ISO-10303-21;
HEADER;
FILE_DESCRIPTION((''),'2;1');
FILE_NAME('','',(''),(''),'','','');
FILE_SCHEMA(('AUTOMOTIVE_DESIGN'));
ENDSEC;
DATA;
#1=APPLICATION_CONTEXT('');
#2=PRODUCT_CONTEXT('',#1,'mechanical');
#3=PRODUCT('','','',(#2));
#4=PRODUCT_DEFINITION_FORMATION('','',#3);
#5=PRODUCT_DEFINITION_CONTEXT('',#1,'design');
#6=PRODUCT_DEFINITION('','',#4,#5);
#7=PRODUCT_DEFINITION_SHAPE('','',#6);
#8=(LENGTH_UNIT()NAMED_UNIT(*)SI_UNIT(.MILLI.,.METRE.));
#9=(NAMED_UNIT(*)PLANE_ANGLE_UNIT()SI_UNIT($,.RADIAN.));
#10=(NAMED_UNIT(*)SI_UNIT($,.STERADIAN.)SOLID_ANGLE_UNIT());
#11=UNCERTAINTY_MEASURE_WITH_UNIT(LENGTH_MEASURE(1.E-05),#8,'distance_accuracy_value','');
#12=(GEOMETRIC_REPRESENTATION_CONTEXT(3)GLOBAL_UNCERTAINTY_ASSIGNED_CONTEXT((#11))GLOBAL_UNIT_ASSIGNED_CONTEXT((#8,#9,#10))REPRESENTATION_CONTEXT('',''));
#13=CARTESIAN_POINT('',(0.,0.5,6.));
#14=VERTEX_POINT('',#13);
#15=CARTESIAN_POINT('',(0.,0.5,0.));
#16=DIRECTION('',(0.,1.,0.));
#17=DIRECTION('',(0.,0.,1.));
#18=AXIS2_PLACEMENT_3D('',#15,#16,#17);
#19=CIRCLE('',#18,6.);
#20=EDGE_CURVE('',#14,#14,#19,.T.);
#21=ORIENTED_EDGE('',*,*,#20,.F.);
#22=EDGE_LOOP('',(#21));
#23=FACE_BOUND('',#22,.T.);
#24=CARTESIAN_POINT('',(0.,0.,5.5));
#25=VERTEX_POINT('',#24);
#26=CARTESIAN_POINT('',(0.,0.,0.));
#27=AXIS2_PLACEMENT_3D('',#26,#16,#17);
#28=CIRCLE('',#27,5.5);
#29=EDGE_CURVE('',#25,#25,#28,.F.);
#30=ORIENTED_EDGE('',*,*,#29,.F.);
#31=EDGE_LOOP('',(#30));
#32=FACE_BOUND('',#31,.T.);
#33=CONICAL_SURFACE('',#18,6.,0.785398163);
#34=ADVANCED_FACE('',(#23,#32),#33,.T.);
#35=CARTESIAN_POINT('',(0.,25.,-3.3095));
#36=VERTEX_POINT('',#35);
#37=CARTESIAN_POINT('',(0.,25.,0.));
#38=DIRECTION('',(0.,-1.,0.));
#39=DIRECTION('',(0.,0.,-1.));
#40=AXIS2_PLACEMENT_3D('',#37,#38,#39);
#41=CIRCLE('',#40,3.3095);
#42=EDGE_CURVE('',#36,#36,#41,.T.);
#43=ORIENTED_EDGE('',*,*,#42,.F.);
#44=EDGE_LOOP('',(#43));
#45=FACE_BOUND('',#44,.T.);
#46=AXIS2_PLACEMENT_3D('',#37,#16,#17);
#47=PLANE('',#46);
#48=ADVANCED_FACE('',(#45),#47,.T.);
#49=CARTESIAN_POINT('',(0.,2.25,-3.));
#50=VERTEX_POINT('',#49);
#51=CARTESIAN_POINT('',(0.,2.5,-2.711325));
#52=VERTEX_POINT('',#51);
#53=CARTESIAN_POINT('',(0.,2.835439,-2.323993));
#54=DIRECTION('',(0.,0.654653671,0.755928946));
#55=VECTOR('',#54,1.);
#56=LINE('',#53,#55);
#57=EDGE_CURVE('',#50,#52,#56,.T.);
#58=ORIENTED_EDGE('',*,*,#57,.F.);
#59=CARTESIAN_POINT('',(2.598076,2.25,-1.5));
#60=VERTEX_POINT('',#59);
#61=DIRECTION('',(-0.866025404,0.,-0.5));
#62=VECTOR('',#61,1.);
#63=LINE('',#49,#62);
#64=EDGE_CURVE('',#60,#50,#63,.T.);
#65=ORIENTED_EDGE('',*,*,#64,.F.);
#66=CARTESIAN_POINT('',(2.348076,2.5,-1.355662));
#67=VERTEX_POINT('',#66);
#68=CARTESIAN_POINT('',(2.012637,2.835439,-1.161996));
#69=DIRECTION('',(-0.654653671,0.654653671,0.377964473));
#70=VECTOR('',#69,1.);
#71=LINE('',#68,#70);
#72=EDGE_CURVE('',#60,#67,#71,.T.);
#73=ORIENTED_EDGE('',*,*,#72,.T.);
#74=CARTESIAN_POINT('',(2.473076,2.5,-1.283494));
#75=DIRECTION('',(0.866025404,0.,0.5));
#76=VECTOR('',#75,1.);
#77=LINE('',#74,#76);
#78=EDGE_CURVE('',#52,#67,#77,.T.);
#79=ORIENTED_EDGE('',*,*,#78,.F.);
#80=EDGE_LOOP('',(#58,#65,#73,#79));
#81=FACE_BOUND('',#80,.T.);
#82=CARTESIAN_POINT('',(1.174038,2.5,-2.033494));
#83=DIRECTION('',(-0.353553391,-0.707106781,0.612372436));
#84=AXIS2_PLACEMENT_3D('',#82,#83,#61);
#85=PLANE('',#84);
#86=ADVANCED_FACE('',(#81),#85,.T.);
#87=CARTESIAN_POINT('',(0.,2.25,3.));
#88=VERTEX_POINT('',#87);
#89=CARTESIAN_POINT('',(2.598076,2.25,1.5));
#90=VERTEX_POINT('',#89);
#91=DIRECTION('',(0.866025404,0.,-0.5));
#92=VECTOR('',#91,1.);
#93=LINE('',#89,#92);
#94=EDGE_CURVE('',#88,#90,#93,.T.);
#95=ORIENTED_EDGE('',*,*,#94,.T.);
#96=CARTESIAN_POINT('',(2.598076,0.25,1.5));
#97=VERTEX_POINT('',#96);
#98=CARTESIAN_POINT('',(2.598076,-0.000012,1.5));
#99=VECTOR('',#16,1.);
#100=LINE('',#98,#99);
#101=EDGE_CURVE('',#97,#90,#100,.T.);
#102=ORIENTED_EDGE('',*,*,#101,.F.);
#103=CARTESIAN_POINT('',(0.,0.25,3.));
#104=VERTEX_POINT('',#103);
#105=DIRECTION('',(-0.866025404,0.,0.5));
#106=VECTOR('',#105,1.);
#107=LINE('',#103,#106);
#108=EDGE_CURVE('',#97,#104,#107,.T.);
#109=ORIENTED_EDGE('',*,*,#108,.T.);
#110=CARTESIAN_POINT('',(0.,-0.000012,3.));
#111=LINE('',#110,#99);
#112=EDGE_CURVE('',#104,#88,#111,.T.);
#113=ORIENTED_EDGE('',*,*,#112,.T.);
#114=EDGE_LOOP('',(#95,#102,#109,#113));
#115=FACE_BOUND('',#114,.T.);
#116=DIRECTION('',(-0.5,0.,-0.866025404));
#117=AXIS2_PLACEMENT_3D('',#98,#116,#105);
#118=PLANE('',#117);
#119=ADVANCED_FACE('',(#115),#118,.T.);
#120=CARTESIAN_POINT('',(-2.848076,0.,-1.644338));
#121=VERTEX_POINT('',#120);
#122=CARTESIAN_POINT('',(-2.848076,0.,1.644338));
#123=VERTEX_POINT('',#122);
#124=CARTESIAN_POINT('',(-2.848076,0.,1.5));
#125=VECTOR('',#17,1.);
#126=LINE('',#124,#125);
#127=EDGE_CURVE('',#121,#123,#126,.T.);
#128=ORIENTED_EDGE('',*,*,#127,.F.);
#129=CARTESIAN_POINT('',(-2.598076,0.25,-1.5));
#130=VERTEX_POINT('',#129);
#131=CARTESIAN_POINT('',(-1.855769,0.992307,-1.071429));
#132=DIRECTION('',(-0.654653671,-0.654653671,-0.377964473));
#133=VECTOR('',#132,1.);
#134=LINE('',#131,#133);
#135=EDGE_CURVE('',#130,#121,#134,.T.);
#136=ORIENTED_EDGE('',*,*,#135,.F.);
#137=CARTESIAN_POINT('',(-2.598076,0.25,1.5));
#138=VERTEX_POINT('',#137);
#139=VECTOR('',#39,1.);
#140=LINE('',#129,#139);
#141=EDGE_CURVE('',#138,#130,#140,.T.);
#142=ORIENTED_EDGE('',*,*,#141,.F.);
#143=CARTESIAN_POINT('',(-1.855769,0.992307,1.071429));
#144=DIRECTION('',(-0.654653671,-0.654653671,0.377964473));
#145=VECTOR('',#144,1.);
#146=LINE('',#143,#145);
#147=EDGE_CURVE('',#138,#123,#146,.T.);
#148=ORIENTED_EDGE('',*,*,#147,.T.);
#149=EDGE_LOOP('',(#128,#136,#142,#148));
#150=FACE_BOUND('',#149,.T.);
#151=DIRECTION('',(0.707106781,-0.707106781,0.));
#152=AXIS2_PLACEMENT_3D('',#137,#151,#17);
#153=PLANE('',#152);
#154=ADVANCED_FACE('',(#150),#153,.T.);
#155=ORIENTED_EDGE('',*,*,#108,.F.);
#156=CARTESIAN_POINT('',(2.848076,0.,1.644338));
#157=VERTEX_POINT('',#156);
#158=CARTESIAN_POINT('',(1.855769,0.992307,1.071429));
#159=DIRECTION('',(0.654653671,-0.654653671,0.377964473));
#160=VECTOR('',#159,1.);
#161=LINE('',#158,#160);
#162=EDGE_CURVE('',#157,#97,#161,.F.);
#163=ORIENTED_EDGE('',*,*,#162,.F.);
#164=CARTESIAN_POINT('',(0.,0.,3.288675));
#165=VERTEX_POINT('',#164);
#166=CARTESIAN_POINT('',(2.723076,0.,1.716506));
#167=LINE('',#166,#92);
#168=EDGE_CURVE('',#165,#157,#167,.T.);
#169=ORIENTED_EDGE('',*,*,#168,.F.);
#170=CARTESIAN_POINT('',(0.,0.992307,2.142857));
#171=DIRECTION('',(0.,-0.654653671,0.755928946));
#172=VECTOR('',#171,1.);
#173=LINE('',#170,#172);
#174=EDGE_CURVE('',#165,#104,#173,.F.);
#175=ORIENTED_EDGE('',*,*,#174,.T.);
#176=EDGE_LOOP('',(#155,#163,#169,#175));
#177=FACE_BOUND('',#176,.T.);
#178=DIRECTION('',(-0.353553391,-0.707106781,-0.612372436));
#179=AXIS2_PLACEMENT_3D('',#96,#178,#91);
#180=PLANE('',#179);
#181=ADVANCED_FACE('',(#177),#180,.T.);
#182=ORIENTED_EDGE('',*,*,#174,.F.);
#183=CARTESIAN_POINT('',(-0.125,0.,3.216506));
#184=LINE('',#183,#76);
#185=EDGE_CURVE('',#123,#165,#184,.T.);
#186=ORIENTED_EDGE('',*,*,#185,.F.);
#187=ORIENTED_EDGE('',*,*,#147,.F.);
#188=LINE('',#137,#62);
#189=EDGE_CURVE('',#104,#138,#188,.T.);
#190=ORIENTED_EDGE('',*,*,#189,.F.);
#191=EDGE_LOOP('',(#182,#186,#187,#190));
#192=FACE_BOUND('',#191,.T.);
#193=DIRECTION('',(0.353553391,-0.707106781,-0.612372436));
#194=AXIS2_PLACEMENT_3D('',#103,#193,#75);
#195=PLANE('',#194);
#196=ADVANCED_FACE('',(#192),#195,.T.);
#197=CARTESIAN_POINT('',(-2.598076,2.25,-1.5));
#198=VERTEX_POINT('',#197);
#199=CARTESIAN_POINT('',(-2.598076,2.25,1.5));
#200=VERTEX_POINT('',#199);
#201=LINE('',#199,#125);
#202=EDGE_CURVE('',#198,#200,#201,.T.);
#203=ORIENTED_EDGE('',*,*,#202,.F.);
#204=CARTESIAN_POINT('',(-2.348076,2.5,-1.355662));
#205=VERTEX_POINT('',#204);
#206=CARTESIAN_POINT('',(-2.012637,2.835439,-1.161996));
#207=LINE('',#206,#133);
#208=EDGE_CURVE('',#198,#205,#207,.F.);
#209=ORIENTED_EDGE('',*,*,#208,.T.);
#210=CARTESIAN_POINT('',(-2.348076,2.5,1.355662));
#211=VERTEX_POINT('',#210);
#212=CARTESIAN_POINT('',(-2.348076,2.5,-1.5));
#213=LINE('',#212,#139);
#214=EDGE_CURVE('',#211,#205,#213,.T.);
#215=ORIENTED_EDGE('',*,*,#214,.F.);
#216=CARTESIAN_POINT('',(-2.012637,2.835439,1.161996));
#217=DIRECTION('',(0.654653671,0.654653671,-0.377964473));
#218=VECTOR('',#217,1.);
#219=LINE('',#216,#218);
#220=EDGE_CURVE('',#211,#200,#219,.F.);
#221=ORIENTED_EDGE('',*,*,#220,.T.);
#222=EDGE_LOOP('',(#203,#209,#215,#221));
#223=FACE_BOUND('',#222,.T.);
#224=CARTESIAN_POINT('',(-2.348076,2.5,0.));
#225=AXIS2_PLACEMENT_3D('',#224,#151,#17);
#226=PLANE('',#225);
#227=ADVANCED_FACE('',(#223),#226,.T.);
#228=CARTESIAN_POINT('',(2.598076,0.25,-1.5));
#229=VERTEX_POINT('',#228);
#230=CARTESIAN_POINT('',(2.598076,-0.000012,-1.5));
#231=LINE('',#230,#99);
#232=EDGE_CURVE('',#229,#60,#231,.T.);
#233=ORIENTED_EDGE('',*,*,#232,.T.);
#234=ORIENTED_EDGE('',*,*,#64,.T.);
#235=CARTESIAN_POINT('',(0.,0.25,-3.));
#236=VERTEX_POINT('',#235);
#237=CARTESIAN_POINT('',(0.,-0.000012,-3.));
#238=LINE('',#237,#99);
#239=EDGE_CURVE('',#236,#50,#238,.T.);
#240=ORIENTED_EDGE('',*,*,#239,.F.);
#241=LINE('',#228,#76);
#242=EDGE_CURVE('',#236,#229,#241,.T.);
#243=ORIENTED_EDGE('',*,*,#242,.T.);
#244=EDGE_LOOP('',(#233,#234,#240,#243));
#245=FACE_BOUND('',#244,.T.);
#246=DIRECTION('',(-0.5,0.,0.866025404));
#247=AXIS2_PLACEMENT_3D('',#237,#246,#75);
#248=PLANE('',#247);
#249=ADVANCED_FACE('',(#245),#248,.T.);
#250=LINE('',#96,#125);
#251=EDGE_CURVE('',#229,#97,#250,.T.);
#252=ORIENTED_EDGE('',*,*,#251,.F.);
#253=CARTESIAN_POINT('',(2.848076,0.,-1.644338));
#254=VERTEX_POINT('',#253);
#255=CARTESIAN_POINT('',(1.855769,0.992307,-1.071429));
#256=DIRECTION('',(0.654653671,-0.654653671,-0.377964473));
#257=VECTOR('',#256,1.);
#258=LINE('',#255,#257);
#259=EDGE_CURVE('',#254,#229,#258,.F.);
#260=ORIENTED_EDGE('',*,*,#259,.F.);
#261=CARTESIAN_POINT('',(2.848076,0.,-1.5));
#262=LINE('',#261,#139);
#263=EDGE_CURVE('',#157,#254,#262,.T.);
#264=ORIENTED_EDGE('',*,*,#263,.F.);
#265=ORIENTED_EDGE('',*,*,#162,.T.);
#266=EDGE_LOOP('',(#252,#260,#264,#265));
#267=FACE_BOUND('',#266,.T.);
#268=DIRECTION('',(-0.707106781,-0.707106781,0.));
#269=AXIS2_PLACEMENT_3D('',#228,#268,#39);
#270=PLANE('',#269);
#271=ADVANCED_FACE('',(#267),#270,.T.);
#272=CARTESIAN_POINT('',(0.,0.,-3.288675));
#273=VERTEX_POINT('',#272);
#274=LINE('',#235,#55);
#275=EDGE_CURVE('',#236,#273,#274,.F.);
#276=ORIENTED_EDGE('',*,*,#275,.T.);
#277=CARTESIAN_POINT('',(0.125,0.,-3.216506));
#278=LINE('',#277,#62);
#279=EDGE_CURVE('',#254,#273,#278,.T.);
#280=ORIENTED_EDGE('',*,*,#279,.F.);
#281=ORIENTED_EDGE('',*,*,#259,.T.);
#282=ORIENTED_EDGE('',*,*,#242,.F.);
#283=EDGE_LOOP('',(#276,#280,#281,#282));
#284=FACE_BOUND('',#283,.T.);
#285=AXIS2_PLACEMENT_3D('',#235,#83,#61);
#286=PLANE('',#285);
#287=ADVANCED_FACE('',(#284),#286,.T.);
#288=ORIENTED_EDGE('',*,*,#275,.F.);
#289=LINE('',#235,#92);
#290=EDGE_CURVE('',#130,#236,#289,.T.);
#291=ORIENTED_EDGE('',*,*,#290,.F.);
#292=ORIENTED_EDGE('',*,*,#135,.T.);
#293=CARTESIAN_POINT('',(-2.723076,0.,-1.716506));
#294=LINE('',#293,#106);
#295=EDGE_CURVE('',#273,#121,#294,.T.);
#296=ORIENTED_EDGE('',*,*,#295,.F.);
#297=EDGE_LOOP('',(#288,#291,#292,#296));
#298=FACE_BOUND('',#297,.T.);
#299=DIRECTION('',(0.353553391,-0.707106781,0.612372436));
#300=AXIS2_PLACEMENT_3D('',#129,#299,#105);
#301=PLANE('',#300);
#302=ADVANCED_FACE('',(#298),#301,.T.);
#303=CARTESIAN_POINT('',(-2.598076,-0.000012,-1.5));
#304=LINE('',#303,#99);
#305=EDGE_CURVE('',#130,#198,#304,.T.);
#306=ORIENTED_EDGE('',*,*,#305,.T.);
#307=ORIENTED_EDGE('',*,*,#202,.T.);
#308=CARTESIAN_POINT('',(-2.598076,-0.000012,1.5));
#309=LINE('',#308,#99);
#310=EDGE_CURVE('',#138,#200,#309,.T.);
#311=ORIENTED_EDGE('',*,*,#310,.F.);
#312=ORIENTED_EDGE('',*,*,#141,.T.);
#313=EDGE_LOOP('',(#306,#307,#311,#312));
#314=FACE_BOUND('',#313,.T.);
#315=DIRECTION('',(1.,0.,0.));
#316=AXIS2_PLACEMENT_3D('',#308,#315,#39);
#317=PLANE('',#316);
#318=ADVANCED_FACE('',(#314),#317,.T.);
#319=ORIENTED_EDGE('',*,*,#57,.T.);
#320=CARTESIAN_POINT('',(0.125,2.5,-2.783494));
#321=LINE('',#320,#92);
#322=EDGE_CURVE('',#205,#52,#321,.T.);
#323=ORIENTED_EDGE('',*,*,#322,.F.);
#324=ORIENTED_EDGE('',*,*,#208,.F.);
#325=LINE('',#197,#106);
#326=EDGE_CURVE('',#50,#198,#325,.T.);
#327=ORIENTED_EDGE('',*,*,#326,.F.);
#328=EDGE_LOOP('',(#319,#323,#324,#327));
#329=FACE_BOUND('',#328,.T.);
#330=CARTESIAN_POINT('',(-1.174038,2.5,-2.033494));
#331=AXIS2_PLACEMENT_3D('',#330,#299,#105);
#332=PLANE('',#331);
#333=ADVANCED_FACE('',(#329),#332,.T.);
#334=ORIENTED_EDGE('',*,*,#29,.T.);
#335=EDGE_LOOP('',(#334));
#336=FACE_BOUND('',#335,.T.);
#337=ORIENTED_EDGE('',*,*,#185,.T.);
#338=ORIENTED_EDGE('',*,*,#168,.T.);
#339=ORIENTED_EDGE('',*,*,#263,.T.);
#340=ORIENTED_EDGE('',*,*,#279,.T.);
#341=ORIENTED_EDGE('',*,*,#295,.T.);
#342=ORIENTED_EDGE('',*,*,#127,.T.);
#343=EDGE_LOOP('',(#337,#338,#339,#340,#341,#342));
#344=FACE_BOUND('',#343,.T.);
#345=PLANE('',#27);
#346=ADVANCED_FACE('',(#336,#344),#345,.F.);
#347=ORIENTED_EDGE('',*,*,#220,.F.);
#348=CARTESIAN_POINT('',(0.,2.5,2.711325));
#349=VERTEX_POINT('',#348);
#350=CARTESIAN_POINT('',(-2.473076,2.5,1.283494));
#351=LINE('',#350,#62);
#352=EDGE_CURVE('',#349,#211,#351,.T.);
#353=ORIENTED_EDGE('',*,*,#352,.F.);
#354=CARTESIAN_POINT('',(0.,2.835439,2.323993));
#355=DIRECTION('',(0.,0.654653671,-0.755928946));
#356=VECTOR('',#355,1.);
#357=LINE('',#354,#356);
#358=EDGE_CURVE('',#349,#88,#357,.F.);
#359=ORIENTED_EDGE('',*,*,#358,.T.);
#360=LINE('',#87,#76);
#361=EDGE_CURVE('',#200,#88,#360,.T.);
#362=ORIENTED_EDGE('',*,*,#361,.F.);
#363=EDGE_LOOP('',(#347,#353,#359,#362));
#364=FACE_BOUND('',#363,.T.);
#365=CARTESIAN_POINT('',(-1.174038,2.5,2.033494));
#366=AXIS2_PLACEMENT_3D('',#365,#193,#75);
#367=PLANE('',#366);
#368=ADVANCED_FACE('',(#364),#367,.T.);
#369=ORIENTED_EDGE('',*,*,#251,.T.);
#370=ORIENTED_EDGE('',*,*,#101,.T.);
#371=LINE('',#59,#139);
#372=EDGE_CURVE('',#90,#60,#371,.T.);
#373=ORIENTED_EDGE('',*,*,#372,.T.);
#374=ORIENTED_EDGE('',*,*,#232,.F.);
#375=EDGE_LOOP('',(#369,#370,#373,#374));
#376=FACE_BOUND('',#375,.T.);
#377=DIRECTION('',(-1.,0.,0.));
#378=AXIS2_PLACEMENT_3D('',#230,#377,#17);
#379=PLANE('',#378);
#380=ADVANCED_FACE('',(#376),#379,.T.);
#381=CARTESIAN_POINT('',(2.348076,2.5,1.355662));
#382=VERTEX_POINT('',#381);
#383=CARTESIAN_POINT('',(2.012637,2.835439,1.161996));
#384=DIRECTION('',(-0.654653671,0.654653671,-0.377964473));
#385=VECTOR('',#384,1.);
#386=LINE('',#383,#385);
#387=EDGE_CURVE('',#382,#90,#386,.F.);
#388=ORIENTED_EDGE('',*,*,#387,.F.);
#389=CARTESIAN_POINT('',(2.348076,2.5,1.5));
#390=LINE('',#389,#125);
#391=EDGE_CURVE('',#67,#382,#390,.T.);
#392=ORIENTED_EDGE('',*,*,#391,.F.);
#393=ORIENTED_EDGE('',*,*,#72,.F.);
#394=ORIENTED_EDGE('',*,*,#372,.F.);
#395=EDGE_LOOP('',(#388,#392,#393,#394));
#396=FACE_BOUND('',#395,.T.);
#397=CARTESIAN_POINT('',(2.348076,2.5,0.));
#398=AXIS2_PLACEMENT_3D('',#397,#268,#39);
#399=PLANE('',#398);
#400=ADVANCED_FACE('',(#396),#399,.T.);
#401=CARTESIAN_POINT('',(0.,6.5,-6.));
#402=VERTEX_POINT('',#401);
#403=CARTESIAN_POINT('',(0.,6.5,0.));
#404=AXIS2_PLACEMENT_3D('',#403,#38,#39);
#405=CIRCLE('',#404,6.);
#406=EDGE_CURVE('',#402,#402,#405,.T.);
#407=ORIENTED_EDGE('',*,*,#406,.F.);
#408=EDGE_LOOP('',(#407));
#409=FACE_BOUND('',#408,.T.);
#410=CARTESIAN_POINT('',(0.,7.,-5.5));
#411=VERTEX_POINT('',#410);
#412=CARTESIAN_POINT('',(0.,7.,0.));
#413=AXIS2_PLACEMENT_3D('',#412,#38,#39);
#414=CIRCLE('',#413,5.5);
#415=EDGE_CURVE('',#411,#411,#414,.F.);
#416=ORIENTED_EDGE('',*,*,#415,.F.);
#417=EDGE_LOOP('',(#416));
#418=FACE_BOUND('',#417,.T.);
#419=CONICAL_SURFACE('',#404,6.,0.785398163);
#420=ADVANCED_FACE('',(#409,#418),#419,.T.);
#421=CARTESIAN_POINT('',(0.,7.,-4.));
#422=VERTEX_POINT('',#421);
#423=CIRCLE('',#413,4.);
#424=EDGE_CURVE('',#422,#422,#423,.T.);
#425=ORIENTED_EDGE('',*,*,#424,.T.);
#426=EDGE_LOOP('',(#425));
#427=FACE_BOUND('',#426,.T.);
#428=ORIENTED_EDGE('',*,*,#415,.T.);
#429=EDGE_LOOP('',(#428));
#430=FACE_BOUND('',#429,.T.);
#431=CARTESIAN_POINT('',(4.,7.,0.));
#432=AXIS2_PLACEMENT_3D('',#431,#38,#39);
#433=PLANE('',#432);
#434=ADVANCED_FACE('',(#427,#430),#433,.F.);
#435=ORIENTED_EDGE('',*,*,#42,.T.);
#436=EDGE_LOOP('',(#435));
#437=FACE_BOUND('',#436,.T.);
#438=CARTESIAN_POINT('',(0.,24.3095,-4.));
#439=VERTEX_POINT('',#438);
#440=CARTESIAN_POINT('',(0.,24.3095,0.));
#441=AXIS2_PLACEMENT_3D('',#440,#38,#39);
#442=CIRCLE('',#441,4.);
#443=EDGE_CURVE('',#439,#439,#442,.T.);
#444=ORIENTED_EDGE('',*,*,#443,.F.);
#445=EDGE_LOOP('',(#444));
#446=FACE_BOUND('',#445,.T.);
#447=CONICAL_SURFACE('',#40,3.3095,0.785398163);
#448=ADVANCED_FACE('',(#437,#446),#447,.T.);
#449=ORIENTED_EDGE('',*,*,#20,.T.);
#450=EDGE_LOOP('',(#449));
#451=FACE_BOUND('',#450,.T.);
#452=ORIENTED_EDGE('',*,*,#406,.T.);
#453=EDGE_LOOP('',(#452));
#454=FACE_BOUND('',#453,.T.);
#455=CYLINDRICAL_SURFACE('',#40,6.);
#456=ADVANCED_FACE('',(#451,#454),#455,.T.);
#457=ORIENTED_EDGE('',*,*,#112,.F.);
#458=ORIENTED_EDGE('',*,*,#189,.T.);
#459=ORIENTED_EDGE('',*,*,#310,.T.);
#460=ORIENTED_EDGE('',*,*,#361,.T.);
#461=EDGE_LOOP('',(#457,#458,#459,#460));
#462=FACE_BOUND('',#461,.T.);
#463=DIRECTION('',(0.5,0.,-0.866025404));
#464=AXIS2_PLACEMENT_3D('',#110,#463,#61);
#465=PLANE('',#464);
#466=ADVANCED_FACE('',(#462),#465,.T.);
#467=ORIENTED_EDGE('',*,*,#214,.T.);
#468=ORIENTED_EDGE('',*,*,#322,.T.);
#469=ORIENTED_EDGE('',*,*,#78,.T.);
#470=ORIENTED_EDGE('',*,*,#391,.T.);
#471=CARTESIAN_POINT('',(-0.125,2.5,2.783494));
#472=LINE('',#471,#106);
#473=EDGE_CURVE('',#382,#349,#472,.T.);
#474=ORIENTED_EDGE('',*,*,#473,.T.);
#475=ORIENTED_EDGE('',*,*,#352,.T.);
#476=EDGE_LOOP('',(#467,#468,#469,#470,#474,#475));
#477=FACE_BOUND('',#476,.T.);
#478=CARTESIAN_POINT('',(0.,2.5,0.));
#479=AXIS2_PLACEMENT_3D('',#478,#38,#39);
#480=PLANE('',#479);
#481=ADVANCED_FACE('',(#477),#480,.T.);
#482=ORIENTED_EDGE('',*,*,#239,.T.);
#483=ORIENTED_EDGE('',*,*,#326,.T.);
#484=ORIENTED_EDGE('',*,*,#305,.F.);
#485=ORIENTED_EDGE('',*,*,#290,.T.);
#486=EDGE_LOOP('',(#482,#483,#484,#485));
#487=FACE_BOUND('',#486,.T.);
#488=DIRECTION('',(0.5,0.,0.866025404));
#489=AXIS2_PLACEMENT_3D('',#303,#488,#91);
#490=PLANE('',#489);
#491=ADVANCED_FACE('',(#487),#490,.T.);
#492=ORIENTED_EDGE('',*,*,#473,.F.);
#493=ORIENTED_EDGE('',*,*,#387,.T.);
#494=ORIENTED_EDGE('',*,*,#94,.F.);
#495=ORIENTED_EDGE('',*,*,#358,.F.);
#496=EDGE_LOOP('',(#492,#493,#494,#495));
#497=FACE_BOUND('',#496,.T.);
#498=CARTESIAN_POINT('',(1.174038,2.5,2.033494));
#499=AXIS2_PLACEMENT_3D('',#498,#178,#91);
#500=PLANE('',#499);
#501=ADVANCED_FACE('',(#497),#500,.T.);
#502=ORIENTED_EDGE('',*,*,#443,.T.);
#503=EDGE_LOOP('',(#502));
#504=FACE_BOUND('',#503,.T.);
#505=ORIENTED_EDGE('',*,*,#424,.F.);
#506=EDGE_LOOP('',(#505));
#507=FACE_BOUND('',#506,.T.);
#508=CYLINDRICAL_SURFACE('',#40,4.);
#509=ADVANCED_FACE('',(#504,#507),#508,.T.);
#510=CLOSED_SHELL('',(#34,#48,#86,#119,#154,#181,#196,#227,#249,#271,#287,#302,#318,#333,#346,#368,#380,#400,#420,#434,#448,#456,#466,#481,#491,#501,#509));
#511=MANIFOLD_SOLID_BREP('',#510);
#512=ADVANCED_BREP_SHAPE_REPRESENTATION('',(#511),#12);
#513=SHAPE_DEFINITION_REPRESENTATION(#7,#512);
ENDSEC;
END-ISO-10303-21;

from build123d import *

# Parameters (mm, degrees)
SKETCH1_R               = 6
BOSS_EXTRUDE1_DEPTH     = 25
CHAMFER1_SIZE           = 0.5
CUT_EXTRUDE1_DEPTH      = 27.400757565
CUT_EXTRUDE1_DEPTH_BACK = 2.5
CHAMFER2_SIZE           = 0.25


# Read off the part's stored shape, not the designer's step: M8x1.25 Machine Threads Stud2
with BuildPart() as part:
    # Sketch1 → Boss-Extrude1 (new body)
    with BuildSketch(Plane(origin=(0, 0, 0), x_dir=(1, 0, 0), z_dir=(0, 1, 0))):
        with Locations(Location((0, 0, 0), (0, 0, 270))):
            Circle(SKETCH1_R)
    extrude(amount=BOSS_EXTRUDE1_DEPTH)

    # M8x1.25 Machine Threads Stud2 outline → M8x1.25 Machine Threads Stud2 (revolve, cut)
    with BuildSketch(Plane.XY):
        Polygon((6, 25), (3.3095, 25), (4, 24.3095), (4, 7), (6, 7), align=None)
    revolve(axis=Axis((0, 0, 0), (0, 1, 0)), mode=Mode.SUBTRACT)

    # Chamfer1
    chamfer1_edges = [part.edges().sort_by_distance(p)[0] for p in [
        (0, 0, -6),
        (0, 7, -6),
    ]]
    chamfer(chamfer1_edges, length=CHAMFER1_SIZE)

    # Sketch6 → Cut-Extrude1 (cut, two sides: drawn at the far end of the back side and taken through both)
    with BuildSketch(Plane.XZ.offset(-CUT_EXTRUDE1_DEPTH_BACK)):
        Polygon((0, -3), (2.598076211, -1.5), (2.598076211, 1.5), (0, 3), (-2.598076211, 1.5), (-2.598076211, -1.5), align=None)
    extrude(amount=CUT_EXTRUDE1_DEPTH + CUT_EXTRUDE1_DEPTH_BACK, mode=Mode.SUBTRACT)

    # Chamfer2
    chamfer2_edges = [part.edges().sort_by_distance(p)[0] for p in [
        (-2.598076211, 0, 0),
        (-1.299038106, 0, 2.25),
        (1.299038106, 0, 2.25),
        (2.598076211, 0, 0),
        (1.299038106, 0, -2.25),
        (-1.299038106, 0, -2.25),
        (-1.299038106, 2.5, -2.25),
        (1.299038106, 2.5, -2.25),
        (2.598076211, 2.5, 0),
        (1.299038106, 2.5, 2.25),
        (-1.299038106, 2.5, 2.25),
        (-2.598076211, 2.5, 0),
    ]]
    chamfer(chamfer2_edges, length=CHAMFER2_SIZE)


solid = part.part
